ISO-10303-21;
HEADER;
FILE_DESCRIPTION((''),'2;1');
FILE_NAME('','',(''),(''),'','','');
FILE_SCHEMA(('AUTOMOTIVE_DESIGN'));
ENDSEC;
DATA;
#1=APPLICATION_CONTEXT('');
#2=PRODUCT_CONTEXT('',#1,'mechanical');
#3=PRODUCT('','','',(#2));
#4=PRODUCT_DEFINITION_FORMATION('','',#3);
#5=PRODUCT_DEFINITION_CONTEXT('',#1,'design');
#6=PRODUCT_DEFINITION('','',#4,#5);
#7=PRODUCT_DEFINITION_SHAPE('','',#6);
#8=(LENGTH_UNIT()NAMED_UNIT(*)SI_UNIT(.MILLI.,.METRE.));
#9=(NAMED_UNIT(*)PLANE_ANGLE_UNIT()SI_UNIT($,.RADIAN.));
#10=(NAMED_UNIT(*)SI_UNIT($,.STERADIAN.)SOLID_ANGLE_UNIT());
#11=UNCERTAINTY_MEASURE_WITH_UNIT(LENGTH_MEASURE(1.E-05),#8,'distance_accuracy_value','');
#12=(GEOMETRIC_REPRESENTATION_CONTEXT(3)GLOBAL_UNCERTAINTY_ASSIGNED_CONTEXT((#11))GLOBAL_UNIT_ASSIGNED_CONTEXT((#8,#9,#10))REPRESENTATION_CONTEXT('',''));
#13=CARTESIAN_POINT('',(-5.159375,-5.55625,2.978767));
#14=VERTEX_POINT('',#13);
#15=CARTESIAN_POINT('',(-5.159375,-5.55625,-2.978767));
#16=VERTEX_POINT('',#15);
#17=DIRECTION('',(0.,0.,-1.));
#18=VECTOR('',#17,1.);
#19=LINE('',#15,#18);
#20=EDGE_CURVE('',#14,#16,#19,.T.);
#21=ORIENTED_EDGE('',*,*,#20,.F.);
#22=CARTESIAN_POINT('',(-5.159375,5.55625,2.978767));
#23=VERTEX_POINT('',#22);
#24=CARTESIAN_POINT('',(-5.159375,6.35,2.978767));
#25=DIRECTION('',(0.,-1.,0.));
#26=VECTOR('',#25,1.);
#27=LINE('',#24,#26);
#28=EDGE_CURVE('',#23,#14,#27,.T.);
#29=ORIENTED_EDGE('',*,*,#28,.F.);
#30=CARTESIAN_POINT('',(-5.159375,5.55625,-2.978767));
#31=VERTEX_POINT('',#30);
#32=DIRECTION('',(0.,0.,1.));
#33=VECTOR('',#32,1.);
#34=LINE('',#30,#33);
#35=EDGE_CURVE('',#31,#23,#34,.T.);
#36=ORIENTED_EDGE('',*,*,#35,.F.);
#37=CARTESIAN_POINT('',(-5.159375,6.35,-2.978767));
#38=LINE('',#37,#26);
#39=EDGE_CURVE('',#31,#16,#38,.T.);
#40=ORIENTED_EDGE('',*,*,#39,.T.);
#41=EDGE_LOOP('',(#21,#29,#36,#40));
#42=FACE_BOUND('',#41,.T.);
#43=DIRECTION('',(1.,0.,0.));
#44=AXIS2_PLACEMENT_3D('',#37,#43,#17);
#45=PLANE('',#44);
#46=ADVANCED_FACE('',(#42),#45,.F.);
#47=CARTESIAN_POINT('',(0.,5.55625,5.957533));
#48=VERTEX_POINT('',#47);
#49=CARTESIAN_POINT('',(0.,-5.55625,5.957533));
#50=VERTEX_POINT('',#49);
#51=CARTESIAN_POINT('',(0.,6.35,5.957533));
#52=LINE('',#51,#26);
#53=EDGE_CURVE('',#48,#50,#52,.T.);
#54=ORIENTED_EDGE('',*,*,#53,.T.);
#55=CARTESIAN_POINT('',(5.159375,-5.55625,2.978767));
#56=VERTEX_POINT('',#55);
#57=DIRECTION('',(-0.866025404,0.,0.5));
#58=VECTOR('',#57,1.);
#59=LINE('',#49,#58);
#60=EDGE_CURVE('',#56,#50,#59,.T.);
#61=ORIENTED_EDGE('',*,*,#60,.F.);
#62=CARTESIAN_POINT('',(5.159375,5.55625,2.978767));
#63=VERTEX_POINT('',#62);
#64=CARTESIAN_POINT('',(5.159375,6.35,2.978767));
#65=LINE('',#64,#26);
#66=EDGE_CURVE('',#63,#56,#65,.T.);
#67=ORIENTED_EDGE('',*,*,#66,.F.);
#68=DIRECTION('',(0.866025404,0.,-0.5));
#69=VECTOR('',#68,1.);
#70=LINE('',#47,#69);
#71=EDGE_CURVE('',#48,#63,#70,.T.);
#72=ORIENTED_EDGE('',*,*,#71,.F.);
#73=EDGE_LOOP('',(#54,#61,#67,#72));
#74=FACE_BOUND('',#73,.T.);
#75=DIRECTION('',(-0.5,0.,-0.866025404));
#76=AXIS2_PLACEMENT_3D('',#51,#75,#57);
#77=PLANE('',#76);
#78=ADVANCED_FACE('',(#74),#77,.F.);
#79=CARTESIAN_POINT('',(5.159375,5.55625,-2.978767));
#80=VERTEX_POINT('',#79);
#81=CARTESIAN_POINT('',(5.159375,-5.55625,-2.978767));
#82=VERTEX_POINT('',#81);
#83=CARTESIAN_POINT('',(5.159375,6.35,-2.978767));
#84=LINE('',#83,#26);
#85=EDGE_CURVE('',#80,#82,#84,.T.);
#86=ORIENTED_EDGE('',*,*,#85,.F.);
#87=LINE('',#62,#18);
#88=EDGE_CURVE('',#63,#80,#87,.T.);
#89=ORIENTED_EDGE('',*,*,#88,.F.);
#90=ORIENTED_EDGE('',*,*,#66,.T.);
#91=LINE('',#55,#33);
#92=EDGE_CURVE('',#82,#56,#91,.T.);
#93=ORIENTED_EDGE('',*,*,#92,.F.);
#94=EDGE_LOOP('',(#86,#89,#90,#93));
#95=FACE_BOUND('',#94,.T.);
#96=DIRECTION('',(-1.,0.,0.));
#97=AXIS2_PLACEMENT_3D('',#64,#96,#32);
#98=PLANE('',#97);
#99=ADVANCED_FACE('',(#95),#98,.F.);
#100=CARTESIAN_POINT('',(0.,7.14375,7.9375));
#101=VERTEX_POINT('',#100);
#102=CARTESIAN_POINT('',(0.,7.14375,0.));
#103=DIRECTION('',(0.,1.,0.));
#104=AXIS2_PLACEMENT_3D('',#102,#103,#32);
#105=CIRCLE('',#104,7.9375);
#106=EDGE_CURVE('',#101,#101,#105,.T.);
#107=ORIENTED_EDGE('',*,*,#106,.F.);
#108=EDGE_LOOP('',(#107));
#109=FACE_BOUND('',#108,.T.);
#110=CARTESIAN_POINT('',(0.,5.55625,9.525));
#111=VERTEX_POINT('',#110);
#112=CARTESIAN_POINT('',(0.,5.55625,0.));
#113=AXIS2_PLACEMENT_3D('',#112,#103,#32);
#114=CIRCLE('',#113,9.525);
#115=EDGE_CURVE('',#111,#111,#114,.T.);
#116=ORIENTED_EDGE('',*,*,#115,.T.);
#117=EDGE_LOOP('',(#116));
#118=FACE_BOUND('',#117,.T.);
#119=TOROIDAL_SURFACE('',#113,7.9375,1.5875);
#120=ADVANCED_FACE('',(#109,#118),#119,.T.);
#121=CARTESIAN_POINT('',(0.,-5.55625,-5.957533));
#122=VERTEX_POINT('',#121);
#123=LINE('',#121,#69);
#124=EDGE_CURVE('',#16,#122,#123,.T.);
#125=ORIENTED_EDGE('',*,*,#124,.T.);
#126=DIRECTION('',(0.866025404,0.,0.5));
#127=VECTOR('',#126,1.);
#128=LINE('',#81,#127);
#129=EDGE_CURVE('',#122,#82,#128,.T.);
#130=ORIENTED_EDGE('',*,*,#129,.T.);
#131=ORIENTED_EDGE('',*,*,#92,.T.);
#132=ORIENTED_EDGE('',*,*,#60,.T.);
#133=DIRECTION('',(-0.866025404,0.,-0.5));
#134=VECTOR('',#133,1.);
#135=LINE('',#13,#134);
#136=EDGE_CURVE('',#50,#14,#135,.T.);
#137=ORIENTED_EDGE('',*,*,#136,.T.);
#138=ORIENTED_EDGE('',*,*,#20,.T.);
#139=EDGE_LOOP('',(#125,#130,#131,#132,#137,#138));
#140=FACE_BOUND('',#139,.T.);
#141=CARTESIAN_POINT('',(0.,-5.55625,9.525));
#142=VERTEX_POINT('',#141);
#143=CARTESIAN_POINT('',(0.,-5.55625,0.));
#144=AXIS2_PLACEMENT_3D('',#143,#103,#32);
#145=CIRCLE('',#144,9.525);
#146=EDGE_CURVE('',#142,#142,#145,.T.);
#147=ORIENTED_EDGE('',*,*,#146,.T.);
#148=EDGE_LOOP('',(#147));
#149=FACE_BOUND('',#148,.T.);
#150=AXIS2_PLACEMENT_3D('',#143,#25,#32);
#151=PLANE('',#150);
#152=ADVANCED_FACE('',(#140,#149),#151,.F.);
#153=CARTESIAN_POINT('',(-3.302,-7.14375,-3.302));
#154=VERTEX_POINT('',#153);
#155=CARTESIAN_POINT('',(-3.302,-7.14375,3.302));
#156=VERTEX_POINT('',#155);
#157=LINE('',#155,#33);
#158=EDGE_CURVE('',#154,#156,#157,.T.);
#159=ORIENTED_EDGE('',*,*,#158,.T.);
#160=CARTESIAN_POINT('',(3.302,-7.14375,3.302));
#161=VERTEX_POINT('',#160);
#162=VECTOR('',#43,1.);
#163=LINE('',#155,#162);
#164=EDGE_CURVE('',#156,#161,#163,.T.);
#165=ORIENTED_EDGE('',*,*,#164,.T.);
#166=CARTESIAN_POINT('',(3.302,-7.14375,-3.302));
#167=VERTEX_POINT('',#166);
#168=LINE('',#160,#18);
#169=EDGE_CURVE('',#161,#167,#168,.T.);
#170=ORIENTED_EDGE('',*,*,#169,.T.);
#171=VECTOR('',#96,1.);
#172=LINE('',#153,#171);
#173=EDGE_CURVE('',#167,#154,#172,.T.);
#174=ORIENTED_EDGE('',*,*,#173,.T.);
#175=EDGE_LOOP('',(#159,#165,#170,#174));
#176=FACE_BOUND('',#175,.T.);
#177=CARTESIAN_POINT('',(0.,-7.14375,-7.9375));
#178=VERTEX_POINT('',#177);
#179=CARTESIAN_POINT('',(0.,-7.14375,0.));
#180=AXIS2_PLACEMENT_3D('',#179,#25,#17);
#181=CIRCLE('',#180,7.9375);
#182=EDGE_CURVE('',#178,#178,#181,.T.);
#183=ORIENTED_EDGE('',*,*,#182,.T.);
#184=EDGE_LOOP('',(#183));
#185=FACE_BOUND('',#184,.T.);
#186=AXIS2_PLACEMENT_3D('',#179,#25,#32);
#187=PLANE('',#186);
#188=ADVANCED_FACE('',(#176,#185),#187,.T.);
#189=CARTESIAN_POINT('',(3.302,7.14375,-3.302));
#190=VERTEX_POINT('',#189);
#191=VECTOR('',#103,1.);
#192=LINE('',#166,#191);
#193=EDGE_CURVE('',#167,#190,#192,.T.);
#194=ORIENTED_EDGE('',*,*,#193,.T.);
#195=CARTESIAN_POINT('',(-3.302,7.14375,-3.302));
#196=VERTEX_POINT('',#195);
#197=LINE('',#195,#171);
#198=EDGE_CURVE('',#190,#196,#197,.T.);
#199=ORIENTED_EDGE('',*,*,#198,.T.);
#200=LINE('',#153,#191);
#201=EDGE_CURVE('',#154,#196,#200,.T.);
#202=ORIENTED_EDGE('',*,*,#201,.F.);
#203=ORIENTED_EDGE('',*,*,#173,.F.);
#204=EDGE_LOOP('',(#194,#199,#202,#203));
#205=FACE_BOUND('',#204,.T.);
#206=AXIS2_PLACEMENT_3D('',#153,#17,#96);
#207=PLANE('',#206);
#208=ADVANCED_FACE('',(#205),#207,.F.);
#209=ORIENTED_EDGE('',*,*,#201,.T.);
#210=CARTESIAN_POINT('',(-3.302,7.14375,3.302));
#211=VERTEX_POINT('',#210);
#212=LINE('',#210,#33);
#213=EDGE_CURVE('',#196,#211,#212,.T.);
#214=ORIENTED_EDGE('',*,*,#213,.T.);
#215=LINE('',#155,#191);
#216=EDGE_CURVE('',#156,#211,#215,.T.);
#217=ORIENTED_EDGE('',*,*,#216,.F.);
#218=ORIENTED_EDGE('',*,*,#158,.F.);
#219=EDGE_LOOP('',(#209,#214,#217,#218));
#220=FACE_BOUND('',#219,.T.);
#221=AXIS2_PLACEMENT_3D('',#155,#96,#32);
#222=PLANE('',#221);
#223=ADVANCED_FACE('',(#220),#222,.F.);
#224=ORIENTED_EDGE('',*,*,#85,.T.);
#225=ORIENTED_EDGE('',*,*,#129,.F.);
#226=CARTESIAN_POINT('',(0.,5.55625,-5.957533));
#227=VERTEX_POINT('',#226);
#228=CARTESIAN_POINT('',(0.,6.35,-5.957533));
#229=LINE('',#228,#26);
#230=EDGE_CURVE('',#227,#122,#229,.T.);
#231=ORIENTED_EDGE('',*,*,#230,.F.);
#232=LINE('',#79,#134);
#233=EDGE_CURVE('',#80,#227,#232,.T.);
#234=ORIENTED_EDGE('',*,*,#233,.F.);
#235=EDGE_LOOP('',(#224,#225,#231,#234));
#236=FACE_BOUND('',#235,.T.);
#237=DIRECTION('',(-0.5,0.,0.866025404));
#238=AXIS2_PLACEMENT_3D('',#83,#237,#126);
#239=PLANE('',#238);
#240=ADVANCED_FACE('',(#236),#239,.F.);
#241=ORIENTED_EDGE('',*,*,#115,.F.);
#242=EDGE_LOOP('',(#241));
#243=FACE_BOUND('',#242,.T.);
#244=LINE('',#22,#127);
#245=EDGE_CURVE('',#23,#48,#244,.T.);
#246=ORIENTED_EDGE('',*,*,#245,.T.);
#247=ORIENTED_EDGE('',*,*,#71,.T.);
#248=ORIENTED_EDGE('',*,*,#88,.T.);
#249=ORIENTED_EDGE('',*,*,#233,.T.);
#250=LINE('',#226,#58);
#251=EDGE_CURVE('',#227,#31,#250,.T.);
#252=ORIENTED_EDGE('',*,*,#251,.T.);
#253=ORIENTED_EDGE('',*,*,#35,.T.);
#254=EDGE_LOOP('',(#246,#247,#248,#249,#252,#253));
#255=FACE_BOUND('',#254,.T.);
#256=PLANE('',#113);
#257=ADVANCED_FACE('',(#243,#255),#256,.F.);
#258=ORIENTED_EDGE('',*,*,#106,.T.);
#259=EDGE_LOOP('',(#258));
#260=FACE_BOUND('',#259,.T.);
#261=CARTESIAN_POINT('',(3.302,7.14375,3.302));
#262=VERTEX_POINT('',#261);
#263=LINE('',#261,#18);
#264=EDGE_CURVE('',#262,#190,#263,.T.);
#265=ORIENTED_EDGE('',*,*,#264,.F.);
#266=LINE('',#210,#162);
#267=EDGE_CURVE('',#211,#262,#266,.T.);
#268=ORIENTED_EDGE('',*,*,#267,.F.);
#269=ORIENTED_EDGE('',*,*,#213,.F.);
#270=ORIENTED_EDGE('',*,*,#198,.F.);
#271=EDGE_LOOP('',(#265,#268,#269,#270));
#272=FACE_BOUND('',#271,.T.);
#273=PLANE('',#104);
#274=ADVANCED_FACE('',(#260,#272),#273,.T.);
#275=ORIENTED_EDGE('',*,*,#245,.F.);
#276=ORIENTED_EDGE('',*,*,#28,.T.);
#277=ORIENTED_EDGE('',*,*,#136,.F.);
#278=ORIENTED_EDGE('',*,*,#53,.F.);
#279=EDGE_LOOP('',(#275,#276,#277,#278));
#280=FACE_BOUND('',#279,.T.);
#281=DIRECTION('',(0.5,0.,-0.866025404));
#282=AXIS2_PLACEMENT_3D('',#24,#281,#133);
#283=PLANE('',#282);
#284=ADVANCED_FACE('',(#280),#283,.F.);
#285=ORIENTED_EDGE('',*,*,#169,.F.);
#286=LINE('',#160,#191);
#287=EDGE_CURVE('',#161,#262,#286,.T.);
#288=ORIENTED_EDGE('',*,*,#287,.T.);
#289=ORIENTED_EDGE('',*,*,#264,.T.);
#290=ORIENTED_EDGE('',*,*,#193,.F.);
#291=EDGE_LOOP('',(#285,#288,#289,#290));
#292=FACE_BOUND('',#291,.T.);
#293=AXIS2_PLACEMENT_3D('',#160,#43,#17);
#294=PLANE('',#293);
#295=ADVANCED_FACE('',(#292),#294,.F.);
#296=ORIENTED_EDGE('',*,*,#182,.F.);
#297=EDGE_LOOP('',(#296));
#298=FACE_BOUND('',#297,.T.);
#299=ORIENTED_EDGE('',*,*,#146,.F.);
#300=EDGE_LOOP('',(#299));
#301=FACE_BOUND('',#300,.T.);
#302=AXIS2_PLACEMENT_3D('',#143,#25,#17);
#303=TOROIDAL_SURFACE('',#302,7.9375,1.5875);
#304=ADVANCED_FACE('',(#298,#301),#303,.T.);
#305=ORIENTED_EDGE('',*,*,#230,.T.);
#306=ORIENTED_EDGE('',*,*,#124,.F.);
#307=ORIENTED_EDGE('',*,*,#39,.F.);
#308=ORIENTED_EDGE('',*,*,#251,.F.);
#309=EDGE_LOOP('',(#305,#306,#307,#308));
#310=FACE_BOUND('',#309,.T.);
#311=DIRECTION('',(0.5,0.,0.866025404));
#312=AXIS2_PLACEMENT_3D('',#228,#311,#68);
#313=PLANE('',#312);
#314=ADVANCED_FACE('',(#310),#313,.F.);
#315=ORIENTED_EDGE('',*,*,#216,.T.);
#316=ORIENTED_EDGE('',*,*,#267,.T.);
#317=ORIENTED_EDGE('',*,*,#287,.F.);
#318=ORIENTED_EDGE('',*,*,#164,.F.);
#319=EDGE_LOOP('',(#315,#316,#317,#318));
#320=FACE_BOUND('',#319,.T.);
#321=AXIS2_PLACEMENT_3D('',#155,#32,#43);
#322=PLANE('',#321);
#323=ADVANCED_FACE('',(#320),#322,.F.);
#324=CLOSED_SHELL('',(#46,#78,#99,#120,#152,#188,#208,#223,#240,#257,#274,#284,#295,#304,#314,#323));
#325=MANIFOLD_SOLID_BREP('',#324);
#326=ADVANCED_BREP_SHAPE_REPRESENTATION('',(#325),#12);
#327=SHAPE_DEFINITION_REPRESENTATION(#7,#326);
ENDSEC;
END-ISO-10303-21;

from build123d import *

# Parameters (mm, degrees)
BOSS_EXTRUDE1_DEPTH = 6.35
SKETCH2_R           = 9.525
BOSS_EXTRUDE2_DEPTH = 0.79375
SKETCH3_W           = 6.604
SKETCH3_H           = 6.604
CUT_EXTRUDE1_DEPTH  = 20.636290542
FILLET1_R           = 1.5875


with BuildPart() as part:
    # Sketch1 → Boss-Extrude1 (new, symmetric)
    with BuildSketch(Plane(origin=(0, 0, 0), x_dir=(1, 0, 0), z_dir=(0, 1, 0))):
        Polygon((0, 5.95753309), (-5.159375, 2.978766545), (-5.159375, -2.978766545), (0, -5.95753309), (5.159375, -2.978766545), (5.159375, 2.978766545), align=None)
    extrude(amount=BOSS_EXTRUDE1_DEPTH, both=True)

    # Sketch2 → Boss-Extrude2 (add, symmetric)
    with BuildSketch(Plane(origin=(0, 6.35, 0), x_dir=(1, 0, 0), z_dir=(0, 1, 0))):
        with Locations(Location((0, 0, 0), (0, 0, 270))):
            Circle(SKETCH2_R)
    boss_extrude2 = extrude(amount=BOSS_EXTRUDE2_DEPTH, both=True)

    # Mirror1: Boss-Extrude2 across plane
    add(boss_extrude2.mirror(Plane.ZX))

    # Sketch3 → Cut-Extrude1 (cut, through all)
    with BuildSketch(Plane(origin=(0, 7.14375, 0), x_dir=(1, 0, 0), z_dir=(0, 1, 0))):
        Rectangle(SKETCH3_W, SKETCH3_H)
    extrude(amount=-CUT_EXTRUDE1_DEPTH, mode=Mode.SUBTRACT)

    # Fillet1
    fillet1_edges = [part.edges().sort_by_distance(p)[0] for p in [
        (0, 7.14375, -9.525),
        (0, -7.14375, -9.525),
    ]]
    fillet(fillet1_edges, radius=FILLET1_R - 0.0001)  # a hair under: the kernel refuses the full size


solid = part.part
